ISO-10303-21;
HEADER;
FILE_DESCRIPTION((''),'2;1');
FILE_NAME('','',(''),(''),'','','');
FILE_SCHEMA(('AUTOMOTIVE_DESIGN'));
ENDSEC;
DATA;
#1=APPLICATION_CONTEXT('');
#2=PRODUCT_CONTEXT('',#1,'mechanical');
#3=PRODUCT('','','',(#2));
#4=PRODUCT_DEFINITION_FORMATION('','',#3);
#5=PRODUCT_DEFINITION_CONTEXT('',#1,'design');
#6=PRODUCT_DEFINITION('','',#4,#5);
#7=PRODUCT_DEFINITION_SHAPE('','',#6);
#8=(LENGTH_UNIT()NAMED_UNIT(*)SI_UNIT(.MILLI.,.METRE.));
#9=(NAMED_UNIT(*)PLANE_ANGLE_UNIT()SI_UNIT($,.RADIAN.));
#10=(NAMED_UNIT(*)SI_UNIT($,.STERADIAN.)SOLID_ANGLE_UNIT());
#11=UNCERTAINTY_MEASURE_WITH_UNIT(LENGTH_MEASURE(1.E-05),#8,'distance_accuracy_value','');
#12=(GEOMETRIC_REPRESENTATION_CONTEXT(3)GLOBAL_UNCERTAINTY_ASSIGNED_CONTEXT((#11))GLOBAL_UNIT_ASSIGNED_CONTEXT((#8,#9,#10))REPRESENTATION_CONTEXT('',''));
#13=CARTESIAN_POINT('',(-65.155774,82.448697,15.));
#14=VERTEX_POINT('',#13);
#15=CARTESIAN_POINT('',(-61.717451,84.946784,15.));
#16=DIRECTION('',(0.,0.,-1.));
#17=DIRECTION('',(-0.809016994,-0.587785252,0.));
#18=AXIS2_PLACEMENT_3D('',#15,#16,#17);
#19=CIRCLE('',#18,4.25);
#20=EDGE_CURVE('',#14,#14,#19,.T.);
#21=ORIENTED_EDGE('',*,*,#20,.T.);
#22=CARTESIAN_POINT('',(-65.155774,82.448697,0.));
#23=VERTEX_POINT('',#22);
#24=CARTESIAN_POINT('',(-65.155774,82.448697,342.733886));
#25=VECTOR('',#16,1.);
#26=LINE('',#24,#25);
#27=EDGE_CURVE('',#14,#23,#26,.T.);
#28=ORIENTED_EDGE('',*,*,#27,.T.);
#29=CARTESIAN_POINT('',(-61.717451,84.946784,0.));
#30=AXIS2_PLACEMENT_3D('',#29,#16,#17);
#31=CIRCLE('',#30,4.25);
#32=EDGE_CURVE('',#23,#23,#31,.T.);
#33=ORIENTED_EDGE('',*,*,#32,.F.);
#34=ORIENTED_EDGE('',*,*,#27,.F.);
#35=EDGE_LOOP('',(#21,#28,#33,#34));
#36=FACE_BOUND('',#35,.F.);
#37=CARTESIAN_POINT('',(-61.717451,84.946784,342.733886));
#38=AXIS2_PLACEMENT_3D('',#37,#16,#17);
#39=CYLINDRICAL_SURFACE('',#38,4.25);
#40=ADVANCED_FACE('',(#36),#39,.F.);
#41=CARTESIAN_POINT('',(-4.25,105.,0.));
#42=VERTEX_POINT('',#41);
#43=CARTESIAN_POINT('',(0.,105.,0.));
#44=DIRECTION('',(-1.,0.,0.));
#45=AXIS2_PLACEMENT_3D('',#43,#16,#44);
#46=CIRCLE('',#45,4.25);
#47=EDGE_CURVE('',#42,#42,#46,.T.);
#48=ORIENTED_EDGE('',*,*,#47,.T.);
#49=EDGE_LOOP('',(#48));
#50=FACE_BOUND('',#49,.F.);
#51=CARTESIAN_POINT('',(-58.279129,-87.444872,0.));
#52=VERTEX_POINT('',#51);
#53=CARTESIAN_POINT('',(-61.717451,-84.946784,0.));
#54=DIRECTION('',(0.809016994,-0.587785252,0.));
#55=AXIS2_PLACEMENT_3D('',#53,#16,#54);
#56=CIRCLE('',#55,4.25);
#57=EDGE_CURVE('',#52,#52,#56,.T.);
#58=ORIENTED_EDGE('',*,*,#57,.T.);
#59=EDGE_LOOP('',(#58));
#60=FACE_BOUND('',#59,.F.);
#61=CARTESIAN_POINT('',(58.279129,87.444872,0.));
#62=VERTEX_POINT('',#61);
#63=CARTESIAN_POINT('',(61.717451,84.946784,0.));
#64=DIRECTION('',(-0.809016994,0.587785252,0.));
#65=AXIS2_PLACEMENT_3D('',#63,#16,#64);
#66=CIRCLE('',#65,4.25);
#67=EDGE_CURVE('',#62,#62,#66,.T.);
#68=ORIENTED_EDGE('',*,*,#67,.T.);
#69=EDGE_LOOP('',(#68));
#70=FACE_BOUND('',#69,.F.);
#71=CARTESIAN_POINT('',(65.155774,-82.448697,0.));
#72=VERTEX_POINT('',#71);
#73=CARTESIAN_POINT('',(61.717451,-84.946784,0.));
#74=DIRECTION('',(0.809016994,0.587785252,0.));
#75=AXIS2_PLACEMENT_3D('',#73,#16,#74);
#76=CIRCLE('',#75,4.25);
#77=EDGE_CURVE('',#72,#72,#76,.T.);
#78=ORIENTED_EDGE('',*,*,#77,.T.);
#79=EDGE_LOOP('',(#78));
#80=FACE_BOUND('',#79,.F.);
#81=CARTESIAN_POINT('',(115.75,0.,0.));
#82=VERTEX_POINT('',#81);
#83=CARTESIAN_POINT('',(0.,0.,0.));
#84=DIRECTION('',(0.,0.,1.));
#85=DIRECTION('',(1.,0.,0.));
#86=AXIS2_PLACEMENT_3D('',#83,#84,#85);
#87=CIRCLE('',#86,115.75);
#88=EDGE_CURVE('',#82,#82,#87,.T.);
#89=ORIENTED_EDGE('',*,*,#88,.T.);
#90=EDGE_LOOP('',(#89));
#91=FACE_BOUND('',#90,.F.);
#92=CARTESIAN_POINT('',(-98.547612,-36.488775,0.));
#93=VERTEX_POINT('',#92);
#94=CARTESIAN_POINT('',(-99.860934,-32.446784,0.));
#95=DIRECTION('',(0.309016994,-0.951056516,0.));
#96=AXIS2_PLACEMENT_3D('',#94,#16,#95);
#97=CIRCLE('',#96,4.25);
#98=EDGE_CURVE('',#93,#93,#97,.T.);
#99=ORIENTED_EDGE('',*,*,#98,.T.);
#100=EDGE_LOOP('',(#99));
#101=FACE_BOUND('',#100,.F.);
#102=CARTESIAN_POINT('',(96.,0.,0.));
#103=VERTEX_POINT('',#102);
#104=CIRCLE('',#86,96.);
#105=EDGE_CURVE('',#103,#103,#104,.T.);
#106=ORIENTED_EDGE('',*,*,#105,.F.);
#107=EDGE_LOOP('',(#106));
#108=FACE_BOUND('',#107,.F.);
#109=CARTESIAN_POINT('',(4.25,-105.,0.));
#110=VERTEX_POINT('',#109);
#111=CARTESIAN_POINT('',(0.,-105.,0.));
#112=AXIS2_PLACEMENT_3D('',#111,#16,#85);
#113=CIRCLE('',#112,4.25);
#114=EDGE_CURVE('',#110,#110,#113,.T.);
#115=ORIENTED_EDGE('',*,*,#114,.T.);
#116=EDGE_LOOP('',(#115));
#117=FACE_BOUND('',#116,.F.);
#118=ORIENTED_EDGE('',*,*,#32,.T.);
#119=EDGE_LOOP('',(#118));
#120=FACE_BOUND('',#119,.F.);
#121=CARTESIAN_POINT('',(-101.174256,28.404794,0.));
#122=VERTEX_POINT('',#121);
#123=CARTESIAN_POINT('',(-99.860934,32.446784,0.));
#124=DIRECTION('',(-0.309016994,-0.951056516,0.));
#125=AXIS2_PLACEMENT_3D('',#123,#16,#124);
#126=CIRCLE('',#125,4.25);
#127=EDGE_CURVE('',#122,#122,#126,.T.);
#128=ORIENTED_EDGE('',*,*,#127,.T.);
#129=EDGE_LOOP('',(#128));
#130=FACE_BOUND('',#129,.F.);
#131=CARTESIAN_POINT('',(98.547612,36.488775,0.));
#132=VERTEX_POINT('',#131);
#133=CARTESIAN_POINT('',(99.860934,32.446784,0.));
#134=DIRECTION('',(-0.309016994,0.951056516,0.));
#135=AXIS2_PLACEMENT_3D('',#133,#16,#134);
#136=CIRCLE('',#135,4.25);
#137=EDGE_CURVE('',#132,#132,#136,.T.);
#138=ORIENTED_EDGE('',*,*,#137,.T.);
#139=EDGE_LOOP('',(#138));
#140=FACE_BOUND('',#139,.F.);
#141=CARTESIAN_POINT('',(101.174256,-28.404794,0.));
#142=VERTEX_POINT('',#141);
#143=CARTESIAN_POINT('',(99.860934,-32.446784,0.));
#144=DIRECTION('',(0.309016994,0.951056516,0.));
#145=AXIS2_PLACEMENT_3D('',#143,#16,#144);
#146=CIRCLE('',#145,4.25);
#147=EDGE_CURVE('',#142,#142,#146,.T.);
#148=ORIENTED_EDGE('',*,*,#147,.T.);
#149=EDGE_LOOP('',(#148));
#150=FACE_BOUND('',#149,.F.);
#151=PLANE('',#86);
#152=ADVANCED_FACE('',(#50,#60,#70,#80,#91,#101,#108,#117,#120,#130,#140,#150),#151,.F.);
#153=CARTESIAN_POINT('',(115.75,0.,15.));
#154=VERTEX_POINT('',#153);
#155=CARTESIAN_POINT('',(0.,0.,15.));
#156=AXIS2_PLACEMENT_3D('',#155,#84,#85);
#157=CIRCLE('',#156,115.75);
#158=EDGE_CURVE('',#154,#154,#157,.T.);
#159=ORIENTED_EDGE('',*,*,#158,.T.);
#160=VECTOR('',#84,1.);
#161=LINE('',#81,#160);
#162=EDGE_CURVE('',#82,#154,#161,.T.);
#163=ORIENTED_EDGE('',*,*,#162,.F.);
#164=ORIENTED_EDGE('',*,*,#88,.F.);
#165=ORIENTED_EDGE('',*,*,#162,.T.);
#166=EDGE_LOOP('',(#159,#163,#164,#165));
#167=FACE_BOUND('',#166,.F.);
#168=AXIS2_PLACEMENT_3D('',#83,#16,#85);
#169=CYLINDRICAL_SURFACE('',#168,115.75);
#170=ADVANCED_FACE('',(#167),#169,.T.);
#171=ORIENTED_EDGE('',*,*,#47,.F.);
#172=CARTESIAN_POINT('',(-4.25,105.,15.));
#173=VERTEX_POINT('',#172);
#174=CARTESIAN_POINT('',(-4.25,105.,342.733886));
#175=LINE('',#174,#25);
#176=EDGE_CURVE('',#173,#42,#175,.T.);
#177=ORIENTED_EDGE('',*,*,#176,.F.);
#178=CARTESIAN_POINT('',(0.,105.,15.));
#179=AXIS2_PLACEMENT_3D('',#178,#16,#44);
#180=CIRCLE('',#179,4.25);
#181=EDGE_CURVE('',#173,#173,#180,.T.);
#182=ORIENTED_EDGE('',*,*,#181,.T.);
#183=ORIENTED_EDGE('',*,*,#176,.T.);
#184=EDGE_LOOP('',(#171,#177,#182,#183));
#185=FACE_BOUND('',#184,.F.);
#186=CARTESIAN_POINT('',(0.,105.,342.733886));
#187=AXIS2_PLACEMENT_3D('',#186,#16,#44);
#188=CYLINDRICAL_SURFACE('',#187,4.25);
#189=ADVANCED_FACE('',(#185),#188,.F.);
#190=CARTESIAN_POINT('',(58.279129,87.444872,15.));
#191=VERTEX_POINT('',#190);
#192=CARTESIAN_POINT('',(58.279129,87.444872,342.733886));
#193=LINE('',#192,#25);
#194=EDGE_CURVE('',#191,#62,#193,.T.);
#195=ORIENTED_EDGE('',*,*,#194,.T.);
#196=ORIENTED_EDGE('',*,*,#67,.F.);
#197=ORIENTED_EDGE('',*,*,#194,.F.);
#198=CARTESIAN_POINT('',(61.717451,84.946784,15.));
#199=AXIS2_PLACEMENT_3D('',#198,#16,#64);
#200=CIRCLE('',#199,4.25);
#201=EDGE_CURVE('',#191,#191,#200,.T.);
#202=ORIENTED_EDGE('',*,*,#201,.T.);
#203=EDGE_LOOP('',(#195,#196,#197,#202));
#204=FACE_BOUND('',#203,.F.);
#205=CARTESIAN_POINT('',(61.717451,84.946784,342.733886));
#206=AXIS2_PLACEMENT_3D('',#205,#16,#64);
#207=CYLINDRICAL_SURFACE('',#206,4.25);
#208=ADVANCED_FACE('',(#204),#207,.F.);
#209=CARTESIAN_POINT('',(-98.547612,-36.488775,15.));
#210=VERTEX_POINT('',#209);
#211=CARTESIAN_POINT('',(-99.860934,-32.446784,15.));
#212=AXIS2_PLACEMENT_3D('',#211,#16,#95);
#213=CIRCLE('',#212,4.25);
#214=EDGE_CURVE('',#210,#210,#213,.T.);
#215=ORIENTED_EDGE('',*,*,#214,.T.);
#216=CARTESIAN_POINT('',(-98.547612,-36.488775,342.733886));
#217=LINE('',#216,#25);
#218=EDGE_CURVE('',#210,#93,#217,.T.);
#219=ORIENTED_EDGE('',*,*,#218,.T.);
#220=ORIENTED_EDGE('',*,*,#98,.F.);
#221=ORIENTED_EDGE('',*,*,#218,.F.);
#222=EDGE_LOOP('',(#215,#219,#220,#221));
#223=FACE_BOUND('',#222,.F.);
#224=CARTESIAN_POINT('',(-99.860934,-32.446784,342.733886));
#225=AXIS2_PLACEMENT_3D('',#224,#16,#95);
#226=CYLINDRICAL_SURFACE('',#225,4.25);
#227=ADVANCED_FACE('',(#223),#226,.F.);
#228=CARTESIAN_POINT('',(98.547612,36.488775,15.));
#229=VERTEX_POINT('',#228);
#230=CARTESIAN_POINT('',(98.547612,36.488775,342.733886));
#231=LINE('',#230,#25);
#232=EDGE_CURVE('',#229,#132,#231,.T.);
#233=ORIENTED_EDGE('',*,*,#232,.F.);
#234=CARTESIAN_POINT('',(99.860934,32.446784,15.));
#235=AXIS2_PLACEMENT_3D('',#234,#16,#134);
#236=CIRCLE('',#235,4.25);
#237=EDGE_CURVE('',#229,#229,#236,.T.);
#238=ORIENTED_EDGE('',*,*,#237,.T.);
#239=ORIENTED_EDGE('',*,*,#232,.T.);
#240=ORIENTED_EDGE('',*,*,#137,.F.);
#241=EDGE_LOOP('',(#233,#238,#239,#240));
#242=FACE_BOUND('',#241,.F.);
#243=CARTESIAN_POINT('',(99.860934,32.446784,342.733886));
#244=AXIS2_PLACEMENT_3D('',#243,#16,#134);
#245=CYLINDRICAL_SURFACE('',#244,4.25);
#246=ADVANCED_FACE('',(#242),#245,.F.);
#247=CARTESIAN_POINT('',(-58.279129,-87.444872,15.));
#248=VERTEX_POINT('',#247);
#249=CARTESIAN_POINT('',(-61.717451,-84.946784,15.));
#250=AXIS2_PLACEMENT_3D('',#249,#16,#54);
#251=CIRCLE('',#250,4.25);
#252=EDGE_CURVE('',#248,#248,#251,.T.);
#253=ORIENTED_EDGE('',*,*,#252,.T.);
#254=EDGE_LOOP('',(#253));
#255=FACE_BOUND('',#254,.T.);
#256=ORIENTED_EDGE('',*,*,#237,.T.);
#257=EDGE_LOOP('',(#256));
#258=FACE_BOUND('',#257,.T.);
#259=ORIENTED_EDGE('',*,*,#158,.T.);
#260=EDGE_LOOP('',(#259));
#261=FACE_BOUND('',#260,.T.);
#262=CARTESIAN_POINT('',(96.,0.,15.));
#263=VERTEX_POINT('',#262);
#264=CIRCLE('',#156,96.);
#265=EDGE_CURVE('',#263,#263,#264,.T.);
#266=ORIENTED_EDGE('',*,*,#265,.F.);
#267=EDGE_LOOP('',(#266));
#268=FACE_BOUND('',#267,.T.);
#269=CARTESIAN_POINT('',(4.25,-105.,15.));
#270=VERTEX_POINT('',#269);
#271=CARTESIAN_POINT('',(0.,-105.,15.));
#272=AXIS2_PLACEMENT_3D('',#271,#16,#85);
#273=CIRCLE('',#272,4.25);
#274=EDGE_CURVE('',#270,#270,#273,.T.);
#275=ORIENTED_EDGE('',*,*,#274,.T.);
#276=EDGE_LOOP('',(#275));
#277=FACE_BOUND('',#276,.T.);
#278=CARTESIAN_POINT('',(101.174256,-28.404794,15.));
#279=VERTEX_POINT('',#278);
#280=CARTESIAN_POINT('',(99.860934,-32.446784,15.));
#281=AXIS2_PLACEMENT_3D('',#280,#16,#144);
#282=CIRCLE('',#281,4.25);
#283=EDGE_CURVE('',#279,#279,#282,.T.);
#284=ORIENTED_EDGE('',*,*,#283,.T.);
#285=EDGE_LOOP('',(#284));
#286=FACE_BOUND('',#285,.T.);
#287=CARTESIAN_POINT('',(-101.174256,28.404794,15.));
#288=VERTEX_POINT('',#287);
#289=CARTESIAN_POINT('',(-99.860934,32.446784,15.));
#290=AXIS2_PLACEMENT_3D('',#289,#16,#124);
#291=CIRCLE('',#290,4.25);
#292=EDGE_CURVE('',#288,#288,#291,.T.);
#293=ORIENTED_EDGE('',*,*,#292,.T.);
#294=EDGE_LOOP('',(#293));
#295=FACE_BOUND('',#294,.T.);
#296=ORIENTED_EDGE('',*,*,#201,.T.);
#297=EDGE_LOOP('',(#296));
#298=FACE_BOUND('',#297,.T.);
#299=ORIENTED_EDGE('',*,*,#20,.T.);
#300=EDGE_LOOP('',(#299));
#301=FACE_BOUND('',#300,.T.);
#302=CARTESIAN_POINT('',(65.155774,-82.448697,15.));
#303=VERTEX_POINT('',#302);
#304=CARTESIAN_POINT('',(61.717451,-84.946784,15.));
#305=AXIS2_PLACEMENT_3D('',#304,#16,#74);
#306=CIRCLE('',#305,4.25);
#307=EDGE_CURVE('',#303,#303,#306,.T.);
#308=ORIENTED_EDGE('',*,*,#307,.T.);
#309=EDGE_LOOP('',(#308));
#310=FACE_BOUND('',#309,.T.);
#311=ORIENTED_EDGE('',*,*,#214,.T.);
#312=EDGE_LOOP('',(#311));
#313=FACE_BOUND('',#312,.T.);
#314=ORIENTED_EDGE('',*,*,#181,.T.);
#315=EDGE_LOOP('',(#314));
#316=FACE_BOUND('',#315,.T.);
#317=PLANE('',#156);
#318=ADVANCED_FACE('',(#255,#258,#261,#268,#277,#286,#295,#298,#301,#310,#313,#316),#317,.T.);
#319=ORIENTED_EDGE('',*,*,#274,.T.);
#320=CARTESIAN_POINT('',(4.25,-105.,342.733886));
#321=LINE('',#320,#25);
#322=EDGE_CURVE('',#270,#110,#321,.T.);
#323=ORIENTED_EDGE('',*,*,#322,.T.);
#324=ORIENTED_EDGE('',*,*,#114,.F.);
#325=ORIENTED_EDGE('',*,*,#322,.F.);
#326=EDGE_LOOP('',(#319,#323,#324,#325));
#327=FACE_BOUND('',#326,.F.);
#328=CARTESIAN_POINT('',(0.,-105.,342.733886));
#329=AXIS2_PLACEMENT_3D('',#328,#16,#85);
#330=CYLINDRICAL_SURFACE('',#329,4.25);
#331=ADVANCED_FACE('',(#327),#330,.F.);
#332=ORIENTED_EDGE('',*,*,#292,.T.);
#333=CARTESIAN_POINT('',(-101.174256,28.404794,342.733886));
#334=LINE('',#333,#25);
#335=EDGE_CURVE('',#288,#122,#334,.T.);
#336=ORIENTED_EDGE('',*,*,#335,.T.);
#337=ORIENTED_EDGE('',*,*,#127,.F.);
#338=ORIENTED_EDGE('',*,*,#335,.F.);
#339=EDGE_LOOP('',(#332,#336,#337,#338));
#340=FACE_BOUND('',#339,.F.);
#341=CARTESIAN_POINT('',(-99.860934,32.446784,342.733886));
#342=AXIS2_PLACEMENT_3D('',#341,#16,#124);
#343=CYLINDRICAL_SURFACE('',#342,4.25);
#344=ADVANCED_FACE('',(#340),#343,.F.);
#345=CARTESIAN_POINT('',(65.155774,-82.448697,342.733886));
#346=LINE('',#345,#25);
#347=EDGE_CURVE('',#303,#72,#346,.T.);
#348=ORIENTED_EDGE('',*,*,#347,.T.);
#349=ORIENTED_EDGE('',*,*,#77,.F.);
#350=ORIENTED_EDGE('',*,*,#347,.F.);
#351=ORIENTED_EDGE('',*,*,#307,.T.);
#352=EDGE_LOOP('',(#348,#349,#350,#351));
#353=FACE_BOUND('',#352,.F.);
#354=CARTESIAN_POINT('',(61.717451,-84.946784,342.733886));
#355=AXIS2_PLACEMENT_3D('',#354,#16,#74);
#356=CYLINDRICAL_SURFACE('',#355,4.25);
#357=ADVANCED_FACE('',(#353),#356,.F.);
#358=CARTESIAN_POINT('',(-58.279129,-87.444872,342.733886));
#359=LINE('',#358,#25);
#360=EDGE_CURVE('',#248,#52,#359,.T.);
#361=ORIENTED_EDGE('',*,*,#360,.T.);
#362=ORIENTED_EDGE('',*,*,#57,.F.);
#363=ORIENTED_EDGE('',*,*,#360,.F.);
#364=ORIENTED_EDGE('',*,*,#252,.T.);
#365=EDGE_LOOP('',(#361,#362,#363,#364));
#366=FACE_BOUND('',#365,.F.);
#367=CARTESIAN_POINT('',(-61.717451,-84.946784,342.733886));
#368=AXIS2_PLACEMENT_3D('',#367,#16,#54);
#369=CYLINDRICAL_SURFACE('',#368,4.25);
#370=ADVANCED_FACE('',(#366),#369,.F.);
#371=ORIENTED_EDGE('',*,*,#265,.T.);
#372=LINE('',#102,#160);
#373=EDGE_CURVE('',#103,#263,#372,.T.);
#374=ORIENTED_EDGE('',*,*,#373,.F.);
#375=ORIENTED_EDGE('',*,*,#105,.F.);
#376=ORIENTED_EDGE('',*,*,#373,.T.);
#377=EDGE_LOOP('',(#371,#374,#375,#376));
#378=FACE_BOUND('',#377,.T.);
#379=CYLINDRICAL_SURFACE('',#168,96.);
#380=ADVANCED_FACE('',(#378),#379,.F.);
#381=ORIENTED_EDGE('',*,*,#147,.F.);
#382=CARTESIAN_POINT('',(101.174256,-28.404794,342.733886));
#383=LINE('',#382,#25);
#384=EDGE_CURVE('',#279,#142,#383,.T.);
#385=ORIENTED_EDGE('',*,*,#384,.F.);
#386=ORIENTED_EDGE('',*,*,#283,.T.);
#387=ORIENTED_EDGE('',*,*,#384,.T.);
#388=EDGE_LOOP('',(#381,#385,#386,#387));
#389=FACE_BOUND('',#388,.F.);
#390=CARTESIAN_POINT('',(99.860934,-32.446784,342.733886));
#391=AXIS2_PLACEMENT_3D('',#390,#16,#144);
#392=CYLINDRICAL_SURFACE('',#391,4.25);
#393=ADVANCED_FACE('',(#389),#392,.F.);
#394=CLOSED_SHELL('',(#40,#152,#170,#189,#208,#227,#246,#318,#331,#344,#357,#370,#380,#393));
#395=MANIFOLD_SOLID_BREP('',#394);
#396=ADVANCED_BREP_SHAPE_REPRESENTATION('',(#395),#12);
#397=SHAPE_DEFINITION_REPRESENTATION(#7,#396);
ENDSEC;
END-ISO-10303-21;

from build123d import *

# Parameters (mm, degrees)
F0_R            = 115.75
F0_R_2          = 96
F1_DEPTH        = 15
F3_D            = 8.5
F3_COPIES_COUNT = 10


# Not quite as in the source:
# - a pattern or mirror of a feature is missing from the dataset's text; its kind, count and spacing are read off the source's solid


with BuildPart() as f1:
    # F0 (on Top) → F1 (new body)
    with BuildSketch(Plane.XY):
        Circle(F0_R)
        Circle(F0_R_2, mode=Mode.SUBTRACT)
    extrude(amount=F1_DEPTH)

    # F3 (through all)
    with Locations(Plane.XY.offset(15)):
        with Locations((0, 105)):
            f3 = Hole(F3_D / 2)

    # F3_copies: F3 ×10 about axis
    f3_copies_axis = Axis((0, 0, 0), (0, 0, 1))
    for i in range(1, F3_COPIES_COUNT):
        add(f3.rotate(f3_copies_axis, i * 360 / F3_COPIES_COUNT), mode=Mode.SUBTRACT)


solid = f1.part
